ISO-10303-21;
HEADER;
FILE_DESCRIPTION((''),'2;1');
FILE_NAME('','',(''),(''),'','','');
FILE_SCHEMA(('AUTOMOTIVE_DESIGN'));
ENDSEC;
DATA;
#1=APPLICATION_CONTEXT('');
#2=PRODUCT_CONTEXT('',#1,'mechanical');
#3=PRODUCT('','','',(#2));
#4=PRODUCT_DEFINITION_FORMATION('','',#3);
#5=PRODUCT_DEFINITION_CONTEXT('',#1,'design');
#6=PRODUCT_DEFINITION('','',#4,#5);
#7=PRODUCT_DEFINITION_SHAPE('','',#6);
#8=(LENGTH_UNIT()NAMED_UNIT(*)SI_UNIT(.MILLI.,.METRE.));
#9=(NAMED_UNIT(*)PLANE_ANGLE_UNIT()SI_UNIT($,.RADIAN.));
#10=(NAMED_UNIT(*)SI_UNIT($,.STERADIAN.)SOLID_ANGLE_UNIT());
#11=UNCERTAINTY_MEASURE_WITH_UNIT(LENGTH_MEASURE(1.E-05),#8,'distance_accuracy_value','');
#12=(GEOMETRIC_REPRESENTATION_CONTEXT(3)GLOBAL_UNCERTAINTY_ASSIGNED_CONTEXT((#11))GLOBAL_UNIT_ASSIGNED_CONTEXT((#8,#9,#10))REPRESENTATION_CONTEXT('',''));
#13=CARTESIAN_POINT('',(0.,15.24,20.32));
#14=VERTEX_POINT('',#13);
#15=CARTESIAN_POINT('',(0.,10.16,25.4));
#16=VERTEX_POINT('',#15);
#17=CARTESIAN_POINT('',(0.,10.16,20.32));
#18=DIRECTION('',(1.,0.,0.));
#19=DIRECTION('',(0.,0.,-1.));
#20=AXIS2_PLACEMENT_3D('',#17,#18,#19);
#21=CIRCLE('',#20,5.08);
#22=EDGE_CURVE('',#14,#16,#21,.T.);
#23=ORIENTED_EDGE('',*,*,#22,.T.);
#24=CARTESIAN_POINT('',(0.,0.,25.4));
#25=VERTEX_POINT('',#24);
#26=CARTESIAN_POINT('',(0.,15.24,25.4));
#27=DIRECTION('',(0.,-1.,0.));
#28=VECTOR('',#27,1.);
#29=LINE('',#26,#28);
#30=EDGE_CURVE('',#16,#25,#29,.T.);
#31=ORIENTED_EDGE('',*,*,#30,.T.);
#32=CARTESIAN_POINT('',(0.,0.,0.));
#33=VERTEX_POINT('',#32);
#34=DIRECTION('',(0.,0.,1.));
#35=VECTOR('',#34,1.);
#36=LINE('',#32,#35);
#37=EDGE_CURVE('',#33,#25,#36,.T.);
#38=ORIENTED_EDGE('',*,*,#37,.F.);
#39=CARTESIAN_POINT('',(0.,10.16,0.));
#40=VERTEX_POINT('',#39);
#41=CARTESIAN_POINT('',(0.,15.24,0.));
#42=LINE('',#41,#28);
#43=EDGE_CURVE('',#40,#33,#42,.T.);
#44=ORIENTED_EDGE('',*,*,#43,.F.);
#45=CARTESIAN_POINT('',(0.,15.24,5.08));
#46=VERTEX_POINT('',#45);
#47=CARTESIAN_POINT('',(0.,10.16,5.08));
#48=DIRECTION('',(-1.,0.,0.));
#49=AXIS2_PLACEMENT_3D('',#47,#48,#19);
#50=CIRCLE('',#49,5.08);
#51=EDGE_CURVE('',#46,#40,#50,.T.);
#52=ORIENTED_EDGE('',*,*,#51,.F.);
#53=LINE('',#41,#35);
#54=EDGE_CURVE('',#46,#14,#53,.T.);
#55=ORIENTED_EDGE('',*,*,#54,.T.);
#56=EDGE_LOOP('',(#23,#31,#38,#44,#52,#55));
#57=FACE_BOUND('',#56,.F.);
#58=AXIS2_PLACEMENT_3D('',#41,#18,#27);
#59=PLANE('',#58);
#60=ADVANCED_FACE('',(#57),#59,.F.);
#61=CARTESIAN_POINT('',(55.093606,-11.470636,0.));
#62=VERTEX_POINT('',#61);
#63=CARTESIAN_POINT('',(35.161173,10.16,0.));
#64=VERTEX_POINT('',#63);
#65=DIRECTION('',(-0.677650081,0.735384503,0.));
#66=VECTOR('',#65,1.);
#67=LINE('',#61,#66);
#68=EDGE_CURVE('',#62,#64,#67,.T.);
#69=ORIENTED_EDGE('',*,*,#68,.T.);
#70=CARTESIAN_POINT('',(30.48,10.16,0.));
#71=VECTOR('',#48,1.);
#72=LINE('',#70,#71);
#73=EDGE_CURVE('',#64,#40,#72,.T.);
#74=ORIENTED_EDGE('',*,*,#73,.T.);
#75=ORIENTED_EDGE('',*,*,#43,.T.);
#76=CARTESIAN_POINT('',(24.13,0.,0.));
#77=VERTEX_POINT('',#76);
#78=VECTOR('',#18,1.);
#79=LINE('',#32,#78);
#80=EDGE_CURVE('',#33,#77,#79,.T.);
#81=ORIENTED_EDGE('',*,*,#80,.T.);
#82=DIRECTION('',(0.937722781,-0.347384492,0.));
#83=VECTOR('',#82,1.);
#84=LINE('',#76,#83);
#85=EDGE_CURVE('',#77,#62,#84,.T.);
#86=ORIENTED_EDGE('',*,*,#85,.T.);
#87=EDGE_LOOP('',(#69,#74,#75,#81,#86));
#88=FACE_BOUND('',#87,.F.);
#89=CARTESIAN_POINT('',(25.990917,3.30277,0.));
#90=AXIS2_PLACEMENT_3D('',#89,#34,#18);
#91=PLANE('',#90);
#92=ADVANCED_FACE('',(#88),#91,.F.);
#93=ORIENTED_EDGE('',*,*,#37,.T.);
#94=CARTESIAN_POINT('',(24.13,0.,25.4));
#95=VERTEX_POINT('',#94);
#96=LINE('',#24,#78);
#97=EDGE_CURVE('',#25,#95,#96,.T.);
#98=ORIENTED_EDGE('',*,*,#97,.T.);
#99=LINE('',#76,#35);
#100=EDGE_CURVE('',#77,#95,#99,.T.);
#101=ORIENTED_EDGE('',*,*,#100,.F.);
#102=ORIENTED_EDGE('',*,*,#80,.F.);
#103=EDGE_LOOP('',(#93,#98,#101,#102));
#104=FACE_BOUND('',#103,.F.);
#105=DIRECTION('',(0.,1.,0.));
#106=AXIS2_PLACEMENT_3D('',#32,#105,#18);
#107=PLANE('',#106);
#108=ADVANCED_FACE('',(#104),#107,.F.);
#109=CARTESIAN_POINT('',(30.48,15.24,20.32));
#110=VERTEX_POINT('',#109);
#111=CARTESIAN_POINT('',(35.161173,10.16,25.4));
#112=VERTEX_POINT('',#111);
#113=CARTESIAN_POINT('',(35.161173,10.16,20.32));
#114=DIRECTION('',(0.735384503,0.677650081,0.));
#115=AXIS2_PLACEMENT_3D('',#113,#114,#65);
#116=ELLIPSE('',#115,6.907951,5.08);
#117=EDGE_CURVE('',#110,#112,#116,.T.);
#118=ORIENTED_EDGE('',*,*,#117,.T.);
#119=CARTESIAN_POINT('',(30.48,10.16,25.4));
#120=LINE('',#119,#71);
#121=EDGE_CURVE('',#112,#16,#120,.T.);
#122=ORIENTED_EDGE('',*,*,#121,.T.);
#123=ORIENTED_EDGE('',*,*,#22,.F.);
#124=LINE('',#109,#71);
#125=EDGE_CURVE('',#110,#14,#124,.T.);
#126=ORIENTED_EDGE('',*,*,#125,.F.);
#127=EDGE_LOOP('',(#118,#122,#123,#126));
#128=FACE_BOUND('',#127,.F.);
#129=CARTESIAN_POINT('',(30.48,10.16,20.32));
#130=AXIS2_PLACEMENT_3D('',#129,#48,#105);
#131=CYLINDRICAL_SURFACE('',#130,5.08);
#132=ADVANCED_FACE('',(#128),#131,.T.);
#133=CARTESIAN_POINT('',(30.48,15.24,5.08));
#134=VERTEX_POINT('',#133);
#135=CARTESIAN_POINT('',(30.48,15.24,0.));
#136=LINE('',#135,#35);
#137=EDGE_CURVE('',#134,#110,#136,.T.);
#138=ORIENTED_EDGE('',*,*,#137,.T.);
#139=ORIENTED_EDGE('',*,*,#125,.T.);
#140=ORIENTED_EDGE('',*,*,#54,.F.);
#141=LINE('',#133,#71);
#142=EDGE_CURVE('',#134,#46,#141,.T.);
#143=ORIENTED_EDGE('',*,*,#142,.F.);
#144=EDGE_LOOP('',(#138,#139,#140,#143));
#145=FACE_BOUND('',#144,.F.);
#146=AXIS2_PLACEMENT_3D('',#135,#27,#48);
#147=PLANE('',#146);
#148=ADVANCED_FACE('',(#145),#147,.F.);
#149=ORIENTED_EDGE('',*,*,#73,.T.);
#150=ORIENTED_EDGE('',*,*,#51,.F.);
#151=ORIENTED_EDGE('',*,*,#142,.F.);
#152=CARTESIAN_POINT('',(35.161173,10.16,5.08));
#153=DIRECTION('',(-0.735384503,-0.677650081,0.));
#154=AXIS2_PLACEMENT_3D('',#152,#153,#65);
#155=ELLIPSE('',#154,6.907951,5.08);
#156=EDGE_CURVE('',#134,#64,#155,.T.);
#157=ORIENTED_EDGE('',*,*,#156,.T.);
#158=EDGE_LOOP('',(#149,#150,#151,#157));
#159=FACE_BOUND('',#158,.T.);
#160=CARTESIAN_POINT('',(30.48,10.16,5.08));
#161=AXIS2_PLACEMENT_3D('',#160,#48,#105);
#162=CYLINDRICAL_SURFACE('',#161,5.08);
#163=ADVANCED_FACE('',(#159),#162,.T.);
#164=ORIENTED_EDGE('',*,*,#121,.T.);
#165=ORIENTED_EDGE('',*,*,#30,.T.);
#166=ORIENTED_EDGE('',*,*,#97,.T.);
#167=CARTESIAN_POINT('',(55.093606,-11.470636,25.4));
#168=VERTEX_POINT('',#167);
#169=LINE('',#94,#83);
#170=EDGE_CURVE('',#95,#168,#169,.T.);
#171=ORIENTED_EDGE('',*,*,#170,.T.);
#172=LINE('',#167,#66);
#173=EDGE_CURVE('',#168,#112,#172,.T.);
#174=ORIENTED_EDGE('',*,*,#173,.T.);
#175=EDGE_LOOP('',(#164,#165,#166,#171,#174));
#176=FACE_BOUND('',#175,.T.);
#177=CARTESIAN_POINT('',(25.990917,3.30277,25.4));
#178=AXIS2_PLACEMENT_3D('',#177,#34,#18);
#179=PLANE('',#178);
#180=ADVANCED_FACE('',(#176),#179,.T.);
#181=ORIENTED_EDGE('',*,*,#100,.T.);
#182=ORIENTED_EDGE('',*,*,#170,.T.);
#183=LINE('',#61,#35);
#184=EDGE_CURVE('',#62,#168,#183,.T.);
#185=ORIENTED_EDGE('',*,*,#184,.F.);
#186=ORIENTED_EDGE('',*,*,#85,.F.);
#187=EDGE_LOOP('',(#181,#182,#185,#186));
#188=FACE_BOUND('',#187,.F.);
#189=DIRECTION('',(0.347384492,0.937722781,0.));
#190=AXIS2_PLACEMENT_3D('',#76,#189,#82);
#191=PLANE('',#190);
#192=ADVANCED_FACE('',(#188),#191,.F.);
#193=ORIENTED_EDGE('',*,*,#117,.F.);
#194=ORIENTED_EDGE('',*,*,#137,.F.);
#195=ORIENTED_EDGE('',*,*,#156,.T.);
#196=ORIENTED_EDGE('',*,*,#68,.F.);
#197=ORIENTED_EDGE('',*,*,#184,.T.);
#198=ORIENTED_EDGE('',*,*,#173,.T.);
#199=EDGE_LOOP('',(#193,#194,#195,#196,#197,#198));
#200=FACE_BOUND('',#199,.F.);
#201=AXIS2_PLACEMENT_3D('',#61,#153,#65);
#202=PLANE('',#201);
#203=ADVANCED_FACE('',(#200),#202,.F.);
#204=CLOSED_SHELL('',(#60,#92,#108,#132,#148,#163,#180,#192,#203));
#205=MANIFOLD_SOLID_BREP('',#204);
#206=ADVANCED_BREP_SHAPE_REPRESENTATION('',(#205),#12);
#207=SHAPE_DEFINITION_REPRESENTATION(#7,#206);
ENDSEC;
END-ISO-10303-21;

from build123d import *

# Parameters (mm, degrees)
F1_DEPTH = 25.4
F2_R     = 5.08
F3_R     = 5.08


# Not quite as in the source:
# - a feature names something its author has since deleted; it is built from what else it names


with BuildPart() as f1:
    # F0 (on Top) → F1 (new body)
    with BuildSketch(Plane.XY):
        Polygon((0, 15.24), (0, 0), (24.13, 0), (55.0936062386, -11.4706359327), (30.48, 15.24), align=None)
    extrude(amount=F1_DEPTH)

    # F2
    f2_edges = [f1.edges().sort_by_distance(p)[0] for p in [
        (15.24, 15.24, 25.4),
    ]]
    fillet(f2_edges, radius=F2_R)

    # F3
    f3_edges = [f1.edges().sort_by_distance(p)[0] for p in [
        (15.24, 15.24, 0),
    ]]
    fillet(f3_edges, radius=F3_R)


solid = f1.part
